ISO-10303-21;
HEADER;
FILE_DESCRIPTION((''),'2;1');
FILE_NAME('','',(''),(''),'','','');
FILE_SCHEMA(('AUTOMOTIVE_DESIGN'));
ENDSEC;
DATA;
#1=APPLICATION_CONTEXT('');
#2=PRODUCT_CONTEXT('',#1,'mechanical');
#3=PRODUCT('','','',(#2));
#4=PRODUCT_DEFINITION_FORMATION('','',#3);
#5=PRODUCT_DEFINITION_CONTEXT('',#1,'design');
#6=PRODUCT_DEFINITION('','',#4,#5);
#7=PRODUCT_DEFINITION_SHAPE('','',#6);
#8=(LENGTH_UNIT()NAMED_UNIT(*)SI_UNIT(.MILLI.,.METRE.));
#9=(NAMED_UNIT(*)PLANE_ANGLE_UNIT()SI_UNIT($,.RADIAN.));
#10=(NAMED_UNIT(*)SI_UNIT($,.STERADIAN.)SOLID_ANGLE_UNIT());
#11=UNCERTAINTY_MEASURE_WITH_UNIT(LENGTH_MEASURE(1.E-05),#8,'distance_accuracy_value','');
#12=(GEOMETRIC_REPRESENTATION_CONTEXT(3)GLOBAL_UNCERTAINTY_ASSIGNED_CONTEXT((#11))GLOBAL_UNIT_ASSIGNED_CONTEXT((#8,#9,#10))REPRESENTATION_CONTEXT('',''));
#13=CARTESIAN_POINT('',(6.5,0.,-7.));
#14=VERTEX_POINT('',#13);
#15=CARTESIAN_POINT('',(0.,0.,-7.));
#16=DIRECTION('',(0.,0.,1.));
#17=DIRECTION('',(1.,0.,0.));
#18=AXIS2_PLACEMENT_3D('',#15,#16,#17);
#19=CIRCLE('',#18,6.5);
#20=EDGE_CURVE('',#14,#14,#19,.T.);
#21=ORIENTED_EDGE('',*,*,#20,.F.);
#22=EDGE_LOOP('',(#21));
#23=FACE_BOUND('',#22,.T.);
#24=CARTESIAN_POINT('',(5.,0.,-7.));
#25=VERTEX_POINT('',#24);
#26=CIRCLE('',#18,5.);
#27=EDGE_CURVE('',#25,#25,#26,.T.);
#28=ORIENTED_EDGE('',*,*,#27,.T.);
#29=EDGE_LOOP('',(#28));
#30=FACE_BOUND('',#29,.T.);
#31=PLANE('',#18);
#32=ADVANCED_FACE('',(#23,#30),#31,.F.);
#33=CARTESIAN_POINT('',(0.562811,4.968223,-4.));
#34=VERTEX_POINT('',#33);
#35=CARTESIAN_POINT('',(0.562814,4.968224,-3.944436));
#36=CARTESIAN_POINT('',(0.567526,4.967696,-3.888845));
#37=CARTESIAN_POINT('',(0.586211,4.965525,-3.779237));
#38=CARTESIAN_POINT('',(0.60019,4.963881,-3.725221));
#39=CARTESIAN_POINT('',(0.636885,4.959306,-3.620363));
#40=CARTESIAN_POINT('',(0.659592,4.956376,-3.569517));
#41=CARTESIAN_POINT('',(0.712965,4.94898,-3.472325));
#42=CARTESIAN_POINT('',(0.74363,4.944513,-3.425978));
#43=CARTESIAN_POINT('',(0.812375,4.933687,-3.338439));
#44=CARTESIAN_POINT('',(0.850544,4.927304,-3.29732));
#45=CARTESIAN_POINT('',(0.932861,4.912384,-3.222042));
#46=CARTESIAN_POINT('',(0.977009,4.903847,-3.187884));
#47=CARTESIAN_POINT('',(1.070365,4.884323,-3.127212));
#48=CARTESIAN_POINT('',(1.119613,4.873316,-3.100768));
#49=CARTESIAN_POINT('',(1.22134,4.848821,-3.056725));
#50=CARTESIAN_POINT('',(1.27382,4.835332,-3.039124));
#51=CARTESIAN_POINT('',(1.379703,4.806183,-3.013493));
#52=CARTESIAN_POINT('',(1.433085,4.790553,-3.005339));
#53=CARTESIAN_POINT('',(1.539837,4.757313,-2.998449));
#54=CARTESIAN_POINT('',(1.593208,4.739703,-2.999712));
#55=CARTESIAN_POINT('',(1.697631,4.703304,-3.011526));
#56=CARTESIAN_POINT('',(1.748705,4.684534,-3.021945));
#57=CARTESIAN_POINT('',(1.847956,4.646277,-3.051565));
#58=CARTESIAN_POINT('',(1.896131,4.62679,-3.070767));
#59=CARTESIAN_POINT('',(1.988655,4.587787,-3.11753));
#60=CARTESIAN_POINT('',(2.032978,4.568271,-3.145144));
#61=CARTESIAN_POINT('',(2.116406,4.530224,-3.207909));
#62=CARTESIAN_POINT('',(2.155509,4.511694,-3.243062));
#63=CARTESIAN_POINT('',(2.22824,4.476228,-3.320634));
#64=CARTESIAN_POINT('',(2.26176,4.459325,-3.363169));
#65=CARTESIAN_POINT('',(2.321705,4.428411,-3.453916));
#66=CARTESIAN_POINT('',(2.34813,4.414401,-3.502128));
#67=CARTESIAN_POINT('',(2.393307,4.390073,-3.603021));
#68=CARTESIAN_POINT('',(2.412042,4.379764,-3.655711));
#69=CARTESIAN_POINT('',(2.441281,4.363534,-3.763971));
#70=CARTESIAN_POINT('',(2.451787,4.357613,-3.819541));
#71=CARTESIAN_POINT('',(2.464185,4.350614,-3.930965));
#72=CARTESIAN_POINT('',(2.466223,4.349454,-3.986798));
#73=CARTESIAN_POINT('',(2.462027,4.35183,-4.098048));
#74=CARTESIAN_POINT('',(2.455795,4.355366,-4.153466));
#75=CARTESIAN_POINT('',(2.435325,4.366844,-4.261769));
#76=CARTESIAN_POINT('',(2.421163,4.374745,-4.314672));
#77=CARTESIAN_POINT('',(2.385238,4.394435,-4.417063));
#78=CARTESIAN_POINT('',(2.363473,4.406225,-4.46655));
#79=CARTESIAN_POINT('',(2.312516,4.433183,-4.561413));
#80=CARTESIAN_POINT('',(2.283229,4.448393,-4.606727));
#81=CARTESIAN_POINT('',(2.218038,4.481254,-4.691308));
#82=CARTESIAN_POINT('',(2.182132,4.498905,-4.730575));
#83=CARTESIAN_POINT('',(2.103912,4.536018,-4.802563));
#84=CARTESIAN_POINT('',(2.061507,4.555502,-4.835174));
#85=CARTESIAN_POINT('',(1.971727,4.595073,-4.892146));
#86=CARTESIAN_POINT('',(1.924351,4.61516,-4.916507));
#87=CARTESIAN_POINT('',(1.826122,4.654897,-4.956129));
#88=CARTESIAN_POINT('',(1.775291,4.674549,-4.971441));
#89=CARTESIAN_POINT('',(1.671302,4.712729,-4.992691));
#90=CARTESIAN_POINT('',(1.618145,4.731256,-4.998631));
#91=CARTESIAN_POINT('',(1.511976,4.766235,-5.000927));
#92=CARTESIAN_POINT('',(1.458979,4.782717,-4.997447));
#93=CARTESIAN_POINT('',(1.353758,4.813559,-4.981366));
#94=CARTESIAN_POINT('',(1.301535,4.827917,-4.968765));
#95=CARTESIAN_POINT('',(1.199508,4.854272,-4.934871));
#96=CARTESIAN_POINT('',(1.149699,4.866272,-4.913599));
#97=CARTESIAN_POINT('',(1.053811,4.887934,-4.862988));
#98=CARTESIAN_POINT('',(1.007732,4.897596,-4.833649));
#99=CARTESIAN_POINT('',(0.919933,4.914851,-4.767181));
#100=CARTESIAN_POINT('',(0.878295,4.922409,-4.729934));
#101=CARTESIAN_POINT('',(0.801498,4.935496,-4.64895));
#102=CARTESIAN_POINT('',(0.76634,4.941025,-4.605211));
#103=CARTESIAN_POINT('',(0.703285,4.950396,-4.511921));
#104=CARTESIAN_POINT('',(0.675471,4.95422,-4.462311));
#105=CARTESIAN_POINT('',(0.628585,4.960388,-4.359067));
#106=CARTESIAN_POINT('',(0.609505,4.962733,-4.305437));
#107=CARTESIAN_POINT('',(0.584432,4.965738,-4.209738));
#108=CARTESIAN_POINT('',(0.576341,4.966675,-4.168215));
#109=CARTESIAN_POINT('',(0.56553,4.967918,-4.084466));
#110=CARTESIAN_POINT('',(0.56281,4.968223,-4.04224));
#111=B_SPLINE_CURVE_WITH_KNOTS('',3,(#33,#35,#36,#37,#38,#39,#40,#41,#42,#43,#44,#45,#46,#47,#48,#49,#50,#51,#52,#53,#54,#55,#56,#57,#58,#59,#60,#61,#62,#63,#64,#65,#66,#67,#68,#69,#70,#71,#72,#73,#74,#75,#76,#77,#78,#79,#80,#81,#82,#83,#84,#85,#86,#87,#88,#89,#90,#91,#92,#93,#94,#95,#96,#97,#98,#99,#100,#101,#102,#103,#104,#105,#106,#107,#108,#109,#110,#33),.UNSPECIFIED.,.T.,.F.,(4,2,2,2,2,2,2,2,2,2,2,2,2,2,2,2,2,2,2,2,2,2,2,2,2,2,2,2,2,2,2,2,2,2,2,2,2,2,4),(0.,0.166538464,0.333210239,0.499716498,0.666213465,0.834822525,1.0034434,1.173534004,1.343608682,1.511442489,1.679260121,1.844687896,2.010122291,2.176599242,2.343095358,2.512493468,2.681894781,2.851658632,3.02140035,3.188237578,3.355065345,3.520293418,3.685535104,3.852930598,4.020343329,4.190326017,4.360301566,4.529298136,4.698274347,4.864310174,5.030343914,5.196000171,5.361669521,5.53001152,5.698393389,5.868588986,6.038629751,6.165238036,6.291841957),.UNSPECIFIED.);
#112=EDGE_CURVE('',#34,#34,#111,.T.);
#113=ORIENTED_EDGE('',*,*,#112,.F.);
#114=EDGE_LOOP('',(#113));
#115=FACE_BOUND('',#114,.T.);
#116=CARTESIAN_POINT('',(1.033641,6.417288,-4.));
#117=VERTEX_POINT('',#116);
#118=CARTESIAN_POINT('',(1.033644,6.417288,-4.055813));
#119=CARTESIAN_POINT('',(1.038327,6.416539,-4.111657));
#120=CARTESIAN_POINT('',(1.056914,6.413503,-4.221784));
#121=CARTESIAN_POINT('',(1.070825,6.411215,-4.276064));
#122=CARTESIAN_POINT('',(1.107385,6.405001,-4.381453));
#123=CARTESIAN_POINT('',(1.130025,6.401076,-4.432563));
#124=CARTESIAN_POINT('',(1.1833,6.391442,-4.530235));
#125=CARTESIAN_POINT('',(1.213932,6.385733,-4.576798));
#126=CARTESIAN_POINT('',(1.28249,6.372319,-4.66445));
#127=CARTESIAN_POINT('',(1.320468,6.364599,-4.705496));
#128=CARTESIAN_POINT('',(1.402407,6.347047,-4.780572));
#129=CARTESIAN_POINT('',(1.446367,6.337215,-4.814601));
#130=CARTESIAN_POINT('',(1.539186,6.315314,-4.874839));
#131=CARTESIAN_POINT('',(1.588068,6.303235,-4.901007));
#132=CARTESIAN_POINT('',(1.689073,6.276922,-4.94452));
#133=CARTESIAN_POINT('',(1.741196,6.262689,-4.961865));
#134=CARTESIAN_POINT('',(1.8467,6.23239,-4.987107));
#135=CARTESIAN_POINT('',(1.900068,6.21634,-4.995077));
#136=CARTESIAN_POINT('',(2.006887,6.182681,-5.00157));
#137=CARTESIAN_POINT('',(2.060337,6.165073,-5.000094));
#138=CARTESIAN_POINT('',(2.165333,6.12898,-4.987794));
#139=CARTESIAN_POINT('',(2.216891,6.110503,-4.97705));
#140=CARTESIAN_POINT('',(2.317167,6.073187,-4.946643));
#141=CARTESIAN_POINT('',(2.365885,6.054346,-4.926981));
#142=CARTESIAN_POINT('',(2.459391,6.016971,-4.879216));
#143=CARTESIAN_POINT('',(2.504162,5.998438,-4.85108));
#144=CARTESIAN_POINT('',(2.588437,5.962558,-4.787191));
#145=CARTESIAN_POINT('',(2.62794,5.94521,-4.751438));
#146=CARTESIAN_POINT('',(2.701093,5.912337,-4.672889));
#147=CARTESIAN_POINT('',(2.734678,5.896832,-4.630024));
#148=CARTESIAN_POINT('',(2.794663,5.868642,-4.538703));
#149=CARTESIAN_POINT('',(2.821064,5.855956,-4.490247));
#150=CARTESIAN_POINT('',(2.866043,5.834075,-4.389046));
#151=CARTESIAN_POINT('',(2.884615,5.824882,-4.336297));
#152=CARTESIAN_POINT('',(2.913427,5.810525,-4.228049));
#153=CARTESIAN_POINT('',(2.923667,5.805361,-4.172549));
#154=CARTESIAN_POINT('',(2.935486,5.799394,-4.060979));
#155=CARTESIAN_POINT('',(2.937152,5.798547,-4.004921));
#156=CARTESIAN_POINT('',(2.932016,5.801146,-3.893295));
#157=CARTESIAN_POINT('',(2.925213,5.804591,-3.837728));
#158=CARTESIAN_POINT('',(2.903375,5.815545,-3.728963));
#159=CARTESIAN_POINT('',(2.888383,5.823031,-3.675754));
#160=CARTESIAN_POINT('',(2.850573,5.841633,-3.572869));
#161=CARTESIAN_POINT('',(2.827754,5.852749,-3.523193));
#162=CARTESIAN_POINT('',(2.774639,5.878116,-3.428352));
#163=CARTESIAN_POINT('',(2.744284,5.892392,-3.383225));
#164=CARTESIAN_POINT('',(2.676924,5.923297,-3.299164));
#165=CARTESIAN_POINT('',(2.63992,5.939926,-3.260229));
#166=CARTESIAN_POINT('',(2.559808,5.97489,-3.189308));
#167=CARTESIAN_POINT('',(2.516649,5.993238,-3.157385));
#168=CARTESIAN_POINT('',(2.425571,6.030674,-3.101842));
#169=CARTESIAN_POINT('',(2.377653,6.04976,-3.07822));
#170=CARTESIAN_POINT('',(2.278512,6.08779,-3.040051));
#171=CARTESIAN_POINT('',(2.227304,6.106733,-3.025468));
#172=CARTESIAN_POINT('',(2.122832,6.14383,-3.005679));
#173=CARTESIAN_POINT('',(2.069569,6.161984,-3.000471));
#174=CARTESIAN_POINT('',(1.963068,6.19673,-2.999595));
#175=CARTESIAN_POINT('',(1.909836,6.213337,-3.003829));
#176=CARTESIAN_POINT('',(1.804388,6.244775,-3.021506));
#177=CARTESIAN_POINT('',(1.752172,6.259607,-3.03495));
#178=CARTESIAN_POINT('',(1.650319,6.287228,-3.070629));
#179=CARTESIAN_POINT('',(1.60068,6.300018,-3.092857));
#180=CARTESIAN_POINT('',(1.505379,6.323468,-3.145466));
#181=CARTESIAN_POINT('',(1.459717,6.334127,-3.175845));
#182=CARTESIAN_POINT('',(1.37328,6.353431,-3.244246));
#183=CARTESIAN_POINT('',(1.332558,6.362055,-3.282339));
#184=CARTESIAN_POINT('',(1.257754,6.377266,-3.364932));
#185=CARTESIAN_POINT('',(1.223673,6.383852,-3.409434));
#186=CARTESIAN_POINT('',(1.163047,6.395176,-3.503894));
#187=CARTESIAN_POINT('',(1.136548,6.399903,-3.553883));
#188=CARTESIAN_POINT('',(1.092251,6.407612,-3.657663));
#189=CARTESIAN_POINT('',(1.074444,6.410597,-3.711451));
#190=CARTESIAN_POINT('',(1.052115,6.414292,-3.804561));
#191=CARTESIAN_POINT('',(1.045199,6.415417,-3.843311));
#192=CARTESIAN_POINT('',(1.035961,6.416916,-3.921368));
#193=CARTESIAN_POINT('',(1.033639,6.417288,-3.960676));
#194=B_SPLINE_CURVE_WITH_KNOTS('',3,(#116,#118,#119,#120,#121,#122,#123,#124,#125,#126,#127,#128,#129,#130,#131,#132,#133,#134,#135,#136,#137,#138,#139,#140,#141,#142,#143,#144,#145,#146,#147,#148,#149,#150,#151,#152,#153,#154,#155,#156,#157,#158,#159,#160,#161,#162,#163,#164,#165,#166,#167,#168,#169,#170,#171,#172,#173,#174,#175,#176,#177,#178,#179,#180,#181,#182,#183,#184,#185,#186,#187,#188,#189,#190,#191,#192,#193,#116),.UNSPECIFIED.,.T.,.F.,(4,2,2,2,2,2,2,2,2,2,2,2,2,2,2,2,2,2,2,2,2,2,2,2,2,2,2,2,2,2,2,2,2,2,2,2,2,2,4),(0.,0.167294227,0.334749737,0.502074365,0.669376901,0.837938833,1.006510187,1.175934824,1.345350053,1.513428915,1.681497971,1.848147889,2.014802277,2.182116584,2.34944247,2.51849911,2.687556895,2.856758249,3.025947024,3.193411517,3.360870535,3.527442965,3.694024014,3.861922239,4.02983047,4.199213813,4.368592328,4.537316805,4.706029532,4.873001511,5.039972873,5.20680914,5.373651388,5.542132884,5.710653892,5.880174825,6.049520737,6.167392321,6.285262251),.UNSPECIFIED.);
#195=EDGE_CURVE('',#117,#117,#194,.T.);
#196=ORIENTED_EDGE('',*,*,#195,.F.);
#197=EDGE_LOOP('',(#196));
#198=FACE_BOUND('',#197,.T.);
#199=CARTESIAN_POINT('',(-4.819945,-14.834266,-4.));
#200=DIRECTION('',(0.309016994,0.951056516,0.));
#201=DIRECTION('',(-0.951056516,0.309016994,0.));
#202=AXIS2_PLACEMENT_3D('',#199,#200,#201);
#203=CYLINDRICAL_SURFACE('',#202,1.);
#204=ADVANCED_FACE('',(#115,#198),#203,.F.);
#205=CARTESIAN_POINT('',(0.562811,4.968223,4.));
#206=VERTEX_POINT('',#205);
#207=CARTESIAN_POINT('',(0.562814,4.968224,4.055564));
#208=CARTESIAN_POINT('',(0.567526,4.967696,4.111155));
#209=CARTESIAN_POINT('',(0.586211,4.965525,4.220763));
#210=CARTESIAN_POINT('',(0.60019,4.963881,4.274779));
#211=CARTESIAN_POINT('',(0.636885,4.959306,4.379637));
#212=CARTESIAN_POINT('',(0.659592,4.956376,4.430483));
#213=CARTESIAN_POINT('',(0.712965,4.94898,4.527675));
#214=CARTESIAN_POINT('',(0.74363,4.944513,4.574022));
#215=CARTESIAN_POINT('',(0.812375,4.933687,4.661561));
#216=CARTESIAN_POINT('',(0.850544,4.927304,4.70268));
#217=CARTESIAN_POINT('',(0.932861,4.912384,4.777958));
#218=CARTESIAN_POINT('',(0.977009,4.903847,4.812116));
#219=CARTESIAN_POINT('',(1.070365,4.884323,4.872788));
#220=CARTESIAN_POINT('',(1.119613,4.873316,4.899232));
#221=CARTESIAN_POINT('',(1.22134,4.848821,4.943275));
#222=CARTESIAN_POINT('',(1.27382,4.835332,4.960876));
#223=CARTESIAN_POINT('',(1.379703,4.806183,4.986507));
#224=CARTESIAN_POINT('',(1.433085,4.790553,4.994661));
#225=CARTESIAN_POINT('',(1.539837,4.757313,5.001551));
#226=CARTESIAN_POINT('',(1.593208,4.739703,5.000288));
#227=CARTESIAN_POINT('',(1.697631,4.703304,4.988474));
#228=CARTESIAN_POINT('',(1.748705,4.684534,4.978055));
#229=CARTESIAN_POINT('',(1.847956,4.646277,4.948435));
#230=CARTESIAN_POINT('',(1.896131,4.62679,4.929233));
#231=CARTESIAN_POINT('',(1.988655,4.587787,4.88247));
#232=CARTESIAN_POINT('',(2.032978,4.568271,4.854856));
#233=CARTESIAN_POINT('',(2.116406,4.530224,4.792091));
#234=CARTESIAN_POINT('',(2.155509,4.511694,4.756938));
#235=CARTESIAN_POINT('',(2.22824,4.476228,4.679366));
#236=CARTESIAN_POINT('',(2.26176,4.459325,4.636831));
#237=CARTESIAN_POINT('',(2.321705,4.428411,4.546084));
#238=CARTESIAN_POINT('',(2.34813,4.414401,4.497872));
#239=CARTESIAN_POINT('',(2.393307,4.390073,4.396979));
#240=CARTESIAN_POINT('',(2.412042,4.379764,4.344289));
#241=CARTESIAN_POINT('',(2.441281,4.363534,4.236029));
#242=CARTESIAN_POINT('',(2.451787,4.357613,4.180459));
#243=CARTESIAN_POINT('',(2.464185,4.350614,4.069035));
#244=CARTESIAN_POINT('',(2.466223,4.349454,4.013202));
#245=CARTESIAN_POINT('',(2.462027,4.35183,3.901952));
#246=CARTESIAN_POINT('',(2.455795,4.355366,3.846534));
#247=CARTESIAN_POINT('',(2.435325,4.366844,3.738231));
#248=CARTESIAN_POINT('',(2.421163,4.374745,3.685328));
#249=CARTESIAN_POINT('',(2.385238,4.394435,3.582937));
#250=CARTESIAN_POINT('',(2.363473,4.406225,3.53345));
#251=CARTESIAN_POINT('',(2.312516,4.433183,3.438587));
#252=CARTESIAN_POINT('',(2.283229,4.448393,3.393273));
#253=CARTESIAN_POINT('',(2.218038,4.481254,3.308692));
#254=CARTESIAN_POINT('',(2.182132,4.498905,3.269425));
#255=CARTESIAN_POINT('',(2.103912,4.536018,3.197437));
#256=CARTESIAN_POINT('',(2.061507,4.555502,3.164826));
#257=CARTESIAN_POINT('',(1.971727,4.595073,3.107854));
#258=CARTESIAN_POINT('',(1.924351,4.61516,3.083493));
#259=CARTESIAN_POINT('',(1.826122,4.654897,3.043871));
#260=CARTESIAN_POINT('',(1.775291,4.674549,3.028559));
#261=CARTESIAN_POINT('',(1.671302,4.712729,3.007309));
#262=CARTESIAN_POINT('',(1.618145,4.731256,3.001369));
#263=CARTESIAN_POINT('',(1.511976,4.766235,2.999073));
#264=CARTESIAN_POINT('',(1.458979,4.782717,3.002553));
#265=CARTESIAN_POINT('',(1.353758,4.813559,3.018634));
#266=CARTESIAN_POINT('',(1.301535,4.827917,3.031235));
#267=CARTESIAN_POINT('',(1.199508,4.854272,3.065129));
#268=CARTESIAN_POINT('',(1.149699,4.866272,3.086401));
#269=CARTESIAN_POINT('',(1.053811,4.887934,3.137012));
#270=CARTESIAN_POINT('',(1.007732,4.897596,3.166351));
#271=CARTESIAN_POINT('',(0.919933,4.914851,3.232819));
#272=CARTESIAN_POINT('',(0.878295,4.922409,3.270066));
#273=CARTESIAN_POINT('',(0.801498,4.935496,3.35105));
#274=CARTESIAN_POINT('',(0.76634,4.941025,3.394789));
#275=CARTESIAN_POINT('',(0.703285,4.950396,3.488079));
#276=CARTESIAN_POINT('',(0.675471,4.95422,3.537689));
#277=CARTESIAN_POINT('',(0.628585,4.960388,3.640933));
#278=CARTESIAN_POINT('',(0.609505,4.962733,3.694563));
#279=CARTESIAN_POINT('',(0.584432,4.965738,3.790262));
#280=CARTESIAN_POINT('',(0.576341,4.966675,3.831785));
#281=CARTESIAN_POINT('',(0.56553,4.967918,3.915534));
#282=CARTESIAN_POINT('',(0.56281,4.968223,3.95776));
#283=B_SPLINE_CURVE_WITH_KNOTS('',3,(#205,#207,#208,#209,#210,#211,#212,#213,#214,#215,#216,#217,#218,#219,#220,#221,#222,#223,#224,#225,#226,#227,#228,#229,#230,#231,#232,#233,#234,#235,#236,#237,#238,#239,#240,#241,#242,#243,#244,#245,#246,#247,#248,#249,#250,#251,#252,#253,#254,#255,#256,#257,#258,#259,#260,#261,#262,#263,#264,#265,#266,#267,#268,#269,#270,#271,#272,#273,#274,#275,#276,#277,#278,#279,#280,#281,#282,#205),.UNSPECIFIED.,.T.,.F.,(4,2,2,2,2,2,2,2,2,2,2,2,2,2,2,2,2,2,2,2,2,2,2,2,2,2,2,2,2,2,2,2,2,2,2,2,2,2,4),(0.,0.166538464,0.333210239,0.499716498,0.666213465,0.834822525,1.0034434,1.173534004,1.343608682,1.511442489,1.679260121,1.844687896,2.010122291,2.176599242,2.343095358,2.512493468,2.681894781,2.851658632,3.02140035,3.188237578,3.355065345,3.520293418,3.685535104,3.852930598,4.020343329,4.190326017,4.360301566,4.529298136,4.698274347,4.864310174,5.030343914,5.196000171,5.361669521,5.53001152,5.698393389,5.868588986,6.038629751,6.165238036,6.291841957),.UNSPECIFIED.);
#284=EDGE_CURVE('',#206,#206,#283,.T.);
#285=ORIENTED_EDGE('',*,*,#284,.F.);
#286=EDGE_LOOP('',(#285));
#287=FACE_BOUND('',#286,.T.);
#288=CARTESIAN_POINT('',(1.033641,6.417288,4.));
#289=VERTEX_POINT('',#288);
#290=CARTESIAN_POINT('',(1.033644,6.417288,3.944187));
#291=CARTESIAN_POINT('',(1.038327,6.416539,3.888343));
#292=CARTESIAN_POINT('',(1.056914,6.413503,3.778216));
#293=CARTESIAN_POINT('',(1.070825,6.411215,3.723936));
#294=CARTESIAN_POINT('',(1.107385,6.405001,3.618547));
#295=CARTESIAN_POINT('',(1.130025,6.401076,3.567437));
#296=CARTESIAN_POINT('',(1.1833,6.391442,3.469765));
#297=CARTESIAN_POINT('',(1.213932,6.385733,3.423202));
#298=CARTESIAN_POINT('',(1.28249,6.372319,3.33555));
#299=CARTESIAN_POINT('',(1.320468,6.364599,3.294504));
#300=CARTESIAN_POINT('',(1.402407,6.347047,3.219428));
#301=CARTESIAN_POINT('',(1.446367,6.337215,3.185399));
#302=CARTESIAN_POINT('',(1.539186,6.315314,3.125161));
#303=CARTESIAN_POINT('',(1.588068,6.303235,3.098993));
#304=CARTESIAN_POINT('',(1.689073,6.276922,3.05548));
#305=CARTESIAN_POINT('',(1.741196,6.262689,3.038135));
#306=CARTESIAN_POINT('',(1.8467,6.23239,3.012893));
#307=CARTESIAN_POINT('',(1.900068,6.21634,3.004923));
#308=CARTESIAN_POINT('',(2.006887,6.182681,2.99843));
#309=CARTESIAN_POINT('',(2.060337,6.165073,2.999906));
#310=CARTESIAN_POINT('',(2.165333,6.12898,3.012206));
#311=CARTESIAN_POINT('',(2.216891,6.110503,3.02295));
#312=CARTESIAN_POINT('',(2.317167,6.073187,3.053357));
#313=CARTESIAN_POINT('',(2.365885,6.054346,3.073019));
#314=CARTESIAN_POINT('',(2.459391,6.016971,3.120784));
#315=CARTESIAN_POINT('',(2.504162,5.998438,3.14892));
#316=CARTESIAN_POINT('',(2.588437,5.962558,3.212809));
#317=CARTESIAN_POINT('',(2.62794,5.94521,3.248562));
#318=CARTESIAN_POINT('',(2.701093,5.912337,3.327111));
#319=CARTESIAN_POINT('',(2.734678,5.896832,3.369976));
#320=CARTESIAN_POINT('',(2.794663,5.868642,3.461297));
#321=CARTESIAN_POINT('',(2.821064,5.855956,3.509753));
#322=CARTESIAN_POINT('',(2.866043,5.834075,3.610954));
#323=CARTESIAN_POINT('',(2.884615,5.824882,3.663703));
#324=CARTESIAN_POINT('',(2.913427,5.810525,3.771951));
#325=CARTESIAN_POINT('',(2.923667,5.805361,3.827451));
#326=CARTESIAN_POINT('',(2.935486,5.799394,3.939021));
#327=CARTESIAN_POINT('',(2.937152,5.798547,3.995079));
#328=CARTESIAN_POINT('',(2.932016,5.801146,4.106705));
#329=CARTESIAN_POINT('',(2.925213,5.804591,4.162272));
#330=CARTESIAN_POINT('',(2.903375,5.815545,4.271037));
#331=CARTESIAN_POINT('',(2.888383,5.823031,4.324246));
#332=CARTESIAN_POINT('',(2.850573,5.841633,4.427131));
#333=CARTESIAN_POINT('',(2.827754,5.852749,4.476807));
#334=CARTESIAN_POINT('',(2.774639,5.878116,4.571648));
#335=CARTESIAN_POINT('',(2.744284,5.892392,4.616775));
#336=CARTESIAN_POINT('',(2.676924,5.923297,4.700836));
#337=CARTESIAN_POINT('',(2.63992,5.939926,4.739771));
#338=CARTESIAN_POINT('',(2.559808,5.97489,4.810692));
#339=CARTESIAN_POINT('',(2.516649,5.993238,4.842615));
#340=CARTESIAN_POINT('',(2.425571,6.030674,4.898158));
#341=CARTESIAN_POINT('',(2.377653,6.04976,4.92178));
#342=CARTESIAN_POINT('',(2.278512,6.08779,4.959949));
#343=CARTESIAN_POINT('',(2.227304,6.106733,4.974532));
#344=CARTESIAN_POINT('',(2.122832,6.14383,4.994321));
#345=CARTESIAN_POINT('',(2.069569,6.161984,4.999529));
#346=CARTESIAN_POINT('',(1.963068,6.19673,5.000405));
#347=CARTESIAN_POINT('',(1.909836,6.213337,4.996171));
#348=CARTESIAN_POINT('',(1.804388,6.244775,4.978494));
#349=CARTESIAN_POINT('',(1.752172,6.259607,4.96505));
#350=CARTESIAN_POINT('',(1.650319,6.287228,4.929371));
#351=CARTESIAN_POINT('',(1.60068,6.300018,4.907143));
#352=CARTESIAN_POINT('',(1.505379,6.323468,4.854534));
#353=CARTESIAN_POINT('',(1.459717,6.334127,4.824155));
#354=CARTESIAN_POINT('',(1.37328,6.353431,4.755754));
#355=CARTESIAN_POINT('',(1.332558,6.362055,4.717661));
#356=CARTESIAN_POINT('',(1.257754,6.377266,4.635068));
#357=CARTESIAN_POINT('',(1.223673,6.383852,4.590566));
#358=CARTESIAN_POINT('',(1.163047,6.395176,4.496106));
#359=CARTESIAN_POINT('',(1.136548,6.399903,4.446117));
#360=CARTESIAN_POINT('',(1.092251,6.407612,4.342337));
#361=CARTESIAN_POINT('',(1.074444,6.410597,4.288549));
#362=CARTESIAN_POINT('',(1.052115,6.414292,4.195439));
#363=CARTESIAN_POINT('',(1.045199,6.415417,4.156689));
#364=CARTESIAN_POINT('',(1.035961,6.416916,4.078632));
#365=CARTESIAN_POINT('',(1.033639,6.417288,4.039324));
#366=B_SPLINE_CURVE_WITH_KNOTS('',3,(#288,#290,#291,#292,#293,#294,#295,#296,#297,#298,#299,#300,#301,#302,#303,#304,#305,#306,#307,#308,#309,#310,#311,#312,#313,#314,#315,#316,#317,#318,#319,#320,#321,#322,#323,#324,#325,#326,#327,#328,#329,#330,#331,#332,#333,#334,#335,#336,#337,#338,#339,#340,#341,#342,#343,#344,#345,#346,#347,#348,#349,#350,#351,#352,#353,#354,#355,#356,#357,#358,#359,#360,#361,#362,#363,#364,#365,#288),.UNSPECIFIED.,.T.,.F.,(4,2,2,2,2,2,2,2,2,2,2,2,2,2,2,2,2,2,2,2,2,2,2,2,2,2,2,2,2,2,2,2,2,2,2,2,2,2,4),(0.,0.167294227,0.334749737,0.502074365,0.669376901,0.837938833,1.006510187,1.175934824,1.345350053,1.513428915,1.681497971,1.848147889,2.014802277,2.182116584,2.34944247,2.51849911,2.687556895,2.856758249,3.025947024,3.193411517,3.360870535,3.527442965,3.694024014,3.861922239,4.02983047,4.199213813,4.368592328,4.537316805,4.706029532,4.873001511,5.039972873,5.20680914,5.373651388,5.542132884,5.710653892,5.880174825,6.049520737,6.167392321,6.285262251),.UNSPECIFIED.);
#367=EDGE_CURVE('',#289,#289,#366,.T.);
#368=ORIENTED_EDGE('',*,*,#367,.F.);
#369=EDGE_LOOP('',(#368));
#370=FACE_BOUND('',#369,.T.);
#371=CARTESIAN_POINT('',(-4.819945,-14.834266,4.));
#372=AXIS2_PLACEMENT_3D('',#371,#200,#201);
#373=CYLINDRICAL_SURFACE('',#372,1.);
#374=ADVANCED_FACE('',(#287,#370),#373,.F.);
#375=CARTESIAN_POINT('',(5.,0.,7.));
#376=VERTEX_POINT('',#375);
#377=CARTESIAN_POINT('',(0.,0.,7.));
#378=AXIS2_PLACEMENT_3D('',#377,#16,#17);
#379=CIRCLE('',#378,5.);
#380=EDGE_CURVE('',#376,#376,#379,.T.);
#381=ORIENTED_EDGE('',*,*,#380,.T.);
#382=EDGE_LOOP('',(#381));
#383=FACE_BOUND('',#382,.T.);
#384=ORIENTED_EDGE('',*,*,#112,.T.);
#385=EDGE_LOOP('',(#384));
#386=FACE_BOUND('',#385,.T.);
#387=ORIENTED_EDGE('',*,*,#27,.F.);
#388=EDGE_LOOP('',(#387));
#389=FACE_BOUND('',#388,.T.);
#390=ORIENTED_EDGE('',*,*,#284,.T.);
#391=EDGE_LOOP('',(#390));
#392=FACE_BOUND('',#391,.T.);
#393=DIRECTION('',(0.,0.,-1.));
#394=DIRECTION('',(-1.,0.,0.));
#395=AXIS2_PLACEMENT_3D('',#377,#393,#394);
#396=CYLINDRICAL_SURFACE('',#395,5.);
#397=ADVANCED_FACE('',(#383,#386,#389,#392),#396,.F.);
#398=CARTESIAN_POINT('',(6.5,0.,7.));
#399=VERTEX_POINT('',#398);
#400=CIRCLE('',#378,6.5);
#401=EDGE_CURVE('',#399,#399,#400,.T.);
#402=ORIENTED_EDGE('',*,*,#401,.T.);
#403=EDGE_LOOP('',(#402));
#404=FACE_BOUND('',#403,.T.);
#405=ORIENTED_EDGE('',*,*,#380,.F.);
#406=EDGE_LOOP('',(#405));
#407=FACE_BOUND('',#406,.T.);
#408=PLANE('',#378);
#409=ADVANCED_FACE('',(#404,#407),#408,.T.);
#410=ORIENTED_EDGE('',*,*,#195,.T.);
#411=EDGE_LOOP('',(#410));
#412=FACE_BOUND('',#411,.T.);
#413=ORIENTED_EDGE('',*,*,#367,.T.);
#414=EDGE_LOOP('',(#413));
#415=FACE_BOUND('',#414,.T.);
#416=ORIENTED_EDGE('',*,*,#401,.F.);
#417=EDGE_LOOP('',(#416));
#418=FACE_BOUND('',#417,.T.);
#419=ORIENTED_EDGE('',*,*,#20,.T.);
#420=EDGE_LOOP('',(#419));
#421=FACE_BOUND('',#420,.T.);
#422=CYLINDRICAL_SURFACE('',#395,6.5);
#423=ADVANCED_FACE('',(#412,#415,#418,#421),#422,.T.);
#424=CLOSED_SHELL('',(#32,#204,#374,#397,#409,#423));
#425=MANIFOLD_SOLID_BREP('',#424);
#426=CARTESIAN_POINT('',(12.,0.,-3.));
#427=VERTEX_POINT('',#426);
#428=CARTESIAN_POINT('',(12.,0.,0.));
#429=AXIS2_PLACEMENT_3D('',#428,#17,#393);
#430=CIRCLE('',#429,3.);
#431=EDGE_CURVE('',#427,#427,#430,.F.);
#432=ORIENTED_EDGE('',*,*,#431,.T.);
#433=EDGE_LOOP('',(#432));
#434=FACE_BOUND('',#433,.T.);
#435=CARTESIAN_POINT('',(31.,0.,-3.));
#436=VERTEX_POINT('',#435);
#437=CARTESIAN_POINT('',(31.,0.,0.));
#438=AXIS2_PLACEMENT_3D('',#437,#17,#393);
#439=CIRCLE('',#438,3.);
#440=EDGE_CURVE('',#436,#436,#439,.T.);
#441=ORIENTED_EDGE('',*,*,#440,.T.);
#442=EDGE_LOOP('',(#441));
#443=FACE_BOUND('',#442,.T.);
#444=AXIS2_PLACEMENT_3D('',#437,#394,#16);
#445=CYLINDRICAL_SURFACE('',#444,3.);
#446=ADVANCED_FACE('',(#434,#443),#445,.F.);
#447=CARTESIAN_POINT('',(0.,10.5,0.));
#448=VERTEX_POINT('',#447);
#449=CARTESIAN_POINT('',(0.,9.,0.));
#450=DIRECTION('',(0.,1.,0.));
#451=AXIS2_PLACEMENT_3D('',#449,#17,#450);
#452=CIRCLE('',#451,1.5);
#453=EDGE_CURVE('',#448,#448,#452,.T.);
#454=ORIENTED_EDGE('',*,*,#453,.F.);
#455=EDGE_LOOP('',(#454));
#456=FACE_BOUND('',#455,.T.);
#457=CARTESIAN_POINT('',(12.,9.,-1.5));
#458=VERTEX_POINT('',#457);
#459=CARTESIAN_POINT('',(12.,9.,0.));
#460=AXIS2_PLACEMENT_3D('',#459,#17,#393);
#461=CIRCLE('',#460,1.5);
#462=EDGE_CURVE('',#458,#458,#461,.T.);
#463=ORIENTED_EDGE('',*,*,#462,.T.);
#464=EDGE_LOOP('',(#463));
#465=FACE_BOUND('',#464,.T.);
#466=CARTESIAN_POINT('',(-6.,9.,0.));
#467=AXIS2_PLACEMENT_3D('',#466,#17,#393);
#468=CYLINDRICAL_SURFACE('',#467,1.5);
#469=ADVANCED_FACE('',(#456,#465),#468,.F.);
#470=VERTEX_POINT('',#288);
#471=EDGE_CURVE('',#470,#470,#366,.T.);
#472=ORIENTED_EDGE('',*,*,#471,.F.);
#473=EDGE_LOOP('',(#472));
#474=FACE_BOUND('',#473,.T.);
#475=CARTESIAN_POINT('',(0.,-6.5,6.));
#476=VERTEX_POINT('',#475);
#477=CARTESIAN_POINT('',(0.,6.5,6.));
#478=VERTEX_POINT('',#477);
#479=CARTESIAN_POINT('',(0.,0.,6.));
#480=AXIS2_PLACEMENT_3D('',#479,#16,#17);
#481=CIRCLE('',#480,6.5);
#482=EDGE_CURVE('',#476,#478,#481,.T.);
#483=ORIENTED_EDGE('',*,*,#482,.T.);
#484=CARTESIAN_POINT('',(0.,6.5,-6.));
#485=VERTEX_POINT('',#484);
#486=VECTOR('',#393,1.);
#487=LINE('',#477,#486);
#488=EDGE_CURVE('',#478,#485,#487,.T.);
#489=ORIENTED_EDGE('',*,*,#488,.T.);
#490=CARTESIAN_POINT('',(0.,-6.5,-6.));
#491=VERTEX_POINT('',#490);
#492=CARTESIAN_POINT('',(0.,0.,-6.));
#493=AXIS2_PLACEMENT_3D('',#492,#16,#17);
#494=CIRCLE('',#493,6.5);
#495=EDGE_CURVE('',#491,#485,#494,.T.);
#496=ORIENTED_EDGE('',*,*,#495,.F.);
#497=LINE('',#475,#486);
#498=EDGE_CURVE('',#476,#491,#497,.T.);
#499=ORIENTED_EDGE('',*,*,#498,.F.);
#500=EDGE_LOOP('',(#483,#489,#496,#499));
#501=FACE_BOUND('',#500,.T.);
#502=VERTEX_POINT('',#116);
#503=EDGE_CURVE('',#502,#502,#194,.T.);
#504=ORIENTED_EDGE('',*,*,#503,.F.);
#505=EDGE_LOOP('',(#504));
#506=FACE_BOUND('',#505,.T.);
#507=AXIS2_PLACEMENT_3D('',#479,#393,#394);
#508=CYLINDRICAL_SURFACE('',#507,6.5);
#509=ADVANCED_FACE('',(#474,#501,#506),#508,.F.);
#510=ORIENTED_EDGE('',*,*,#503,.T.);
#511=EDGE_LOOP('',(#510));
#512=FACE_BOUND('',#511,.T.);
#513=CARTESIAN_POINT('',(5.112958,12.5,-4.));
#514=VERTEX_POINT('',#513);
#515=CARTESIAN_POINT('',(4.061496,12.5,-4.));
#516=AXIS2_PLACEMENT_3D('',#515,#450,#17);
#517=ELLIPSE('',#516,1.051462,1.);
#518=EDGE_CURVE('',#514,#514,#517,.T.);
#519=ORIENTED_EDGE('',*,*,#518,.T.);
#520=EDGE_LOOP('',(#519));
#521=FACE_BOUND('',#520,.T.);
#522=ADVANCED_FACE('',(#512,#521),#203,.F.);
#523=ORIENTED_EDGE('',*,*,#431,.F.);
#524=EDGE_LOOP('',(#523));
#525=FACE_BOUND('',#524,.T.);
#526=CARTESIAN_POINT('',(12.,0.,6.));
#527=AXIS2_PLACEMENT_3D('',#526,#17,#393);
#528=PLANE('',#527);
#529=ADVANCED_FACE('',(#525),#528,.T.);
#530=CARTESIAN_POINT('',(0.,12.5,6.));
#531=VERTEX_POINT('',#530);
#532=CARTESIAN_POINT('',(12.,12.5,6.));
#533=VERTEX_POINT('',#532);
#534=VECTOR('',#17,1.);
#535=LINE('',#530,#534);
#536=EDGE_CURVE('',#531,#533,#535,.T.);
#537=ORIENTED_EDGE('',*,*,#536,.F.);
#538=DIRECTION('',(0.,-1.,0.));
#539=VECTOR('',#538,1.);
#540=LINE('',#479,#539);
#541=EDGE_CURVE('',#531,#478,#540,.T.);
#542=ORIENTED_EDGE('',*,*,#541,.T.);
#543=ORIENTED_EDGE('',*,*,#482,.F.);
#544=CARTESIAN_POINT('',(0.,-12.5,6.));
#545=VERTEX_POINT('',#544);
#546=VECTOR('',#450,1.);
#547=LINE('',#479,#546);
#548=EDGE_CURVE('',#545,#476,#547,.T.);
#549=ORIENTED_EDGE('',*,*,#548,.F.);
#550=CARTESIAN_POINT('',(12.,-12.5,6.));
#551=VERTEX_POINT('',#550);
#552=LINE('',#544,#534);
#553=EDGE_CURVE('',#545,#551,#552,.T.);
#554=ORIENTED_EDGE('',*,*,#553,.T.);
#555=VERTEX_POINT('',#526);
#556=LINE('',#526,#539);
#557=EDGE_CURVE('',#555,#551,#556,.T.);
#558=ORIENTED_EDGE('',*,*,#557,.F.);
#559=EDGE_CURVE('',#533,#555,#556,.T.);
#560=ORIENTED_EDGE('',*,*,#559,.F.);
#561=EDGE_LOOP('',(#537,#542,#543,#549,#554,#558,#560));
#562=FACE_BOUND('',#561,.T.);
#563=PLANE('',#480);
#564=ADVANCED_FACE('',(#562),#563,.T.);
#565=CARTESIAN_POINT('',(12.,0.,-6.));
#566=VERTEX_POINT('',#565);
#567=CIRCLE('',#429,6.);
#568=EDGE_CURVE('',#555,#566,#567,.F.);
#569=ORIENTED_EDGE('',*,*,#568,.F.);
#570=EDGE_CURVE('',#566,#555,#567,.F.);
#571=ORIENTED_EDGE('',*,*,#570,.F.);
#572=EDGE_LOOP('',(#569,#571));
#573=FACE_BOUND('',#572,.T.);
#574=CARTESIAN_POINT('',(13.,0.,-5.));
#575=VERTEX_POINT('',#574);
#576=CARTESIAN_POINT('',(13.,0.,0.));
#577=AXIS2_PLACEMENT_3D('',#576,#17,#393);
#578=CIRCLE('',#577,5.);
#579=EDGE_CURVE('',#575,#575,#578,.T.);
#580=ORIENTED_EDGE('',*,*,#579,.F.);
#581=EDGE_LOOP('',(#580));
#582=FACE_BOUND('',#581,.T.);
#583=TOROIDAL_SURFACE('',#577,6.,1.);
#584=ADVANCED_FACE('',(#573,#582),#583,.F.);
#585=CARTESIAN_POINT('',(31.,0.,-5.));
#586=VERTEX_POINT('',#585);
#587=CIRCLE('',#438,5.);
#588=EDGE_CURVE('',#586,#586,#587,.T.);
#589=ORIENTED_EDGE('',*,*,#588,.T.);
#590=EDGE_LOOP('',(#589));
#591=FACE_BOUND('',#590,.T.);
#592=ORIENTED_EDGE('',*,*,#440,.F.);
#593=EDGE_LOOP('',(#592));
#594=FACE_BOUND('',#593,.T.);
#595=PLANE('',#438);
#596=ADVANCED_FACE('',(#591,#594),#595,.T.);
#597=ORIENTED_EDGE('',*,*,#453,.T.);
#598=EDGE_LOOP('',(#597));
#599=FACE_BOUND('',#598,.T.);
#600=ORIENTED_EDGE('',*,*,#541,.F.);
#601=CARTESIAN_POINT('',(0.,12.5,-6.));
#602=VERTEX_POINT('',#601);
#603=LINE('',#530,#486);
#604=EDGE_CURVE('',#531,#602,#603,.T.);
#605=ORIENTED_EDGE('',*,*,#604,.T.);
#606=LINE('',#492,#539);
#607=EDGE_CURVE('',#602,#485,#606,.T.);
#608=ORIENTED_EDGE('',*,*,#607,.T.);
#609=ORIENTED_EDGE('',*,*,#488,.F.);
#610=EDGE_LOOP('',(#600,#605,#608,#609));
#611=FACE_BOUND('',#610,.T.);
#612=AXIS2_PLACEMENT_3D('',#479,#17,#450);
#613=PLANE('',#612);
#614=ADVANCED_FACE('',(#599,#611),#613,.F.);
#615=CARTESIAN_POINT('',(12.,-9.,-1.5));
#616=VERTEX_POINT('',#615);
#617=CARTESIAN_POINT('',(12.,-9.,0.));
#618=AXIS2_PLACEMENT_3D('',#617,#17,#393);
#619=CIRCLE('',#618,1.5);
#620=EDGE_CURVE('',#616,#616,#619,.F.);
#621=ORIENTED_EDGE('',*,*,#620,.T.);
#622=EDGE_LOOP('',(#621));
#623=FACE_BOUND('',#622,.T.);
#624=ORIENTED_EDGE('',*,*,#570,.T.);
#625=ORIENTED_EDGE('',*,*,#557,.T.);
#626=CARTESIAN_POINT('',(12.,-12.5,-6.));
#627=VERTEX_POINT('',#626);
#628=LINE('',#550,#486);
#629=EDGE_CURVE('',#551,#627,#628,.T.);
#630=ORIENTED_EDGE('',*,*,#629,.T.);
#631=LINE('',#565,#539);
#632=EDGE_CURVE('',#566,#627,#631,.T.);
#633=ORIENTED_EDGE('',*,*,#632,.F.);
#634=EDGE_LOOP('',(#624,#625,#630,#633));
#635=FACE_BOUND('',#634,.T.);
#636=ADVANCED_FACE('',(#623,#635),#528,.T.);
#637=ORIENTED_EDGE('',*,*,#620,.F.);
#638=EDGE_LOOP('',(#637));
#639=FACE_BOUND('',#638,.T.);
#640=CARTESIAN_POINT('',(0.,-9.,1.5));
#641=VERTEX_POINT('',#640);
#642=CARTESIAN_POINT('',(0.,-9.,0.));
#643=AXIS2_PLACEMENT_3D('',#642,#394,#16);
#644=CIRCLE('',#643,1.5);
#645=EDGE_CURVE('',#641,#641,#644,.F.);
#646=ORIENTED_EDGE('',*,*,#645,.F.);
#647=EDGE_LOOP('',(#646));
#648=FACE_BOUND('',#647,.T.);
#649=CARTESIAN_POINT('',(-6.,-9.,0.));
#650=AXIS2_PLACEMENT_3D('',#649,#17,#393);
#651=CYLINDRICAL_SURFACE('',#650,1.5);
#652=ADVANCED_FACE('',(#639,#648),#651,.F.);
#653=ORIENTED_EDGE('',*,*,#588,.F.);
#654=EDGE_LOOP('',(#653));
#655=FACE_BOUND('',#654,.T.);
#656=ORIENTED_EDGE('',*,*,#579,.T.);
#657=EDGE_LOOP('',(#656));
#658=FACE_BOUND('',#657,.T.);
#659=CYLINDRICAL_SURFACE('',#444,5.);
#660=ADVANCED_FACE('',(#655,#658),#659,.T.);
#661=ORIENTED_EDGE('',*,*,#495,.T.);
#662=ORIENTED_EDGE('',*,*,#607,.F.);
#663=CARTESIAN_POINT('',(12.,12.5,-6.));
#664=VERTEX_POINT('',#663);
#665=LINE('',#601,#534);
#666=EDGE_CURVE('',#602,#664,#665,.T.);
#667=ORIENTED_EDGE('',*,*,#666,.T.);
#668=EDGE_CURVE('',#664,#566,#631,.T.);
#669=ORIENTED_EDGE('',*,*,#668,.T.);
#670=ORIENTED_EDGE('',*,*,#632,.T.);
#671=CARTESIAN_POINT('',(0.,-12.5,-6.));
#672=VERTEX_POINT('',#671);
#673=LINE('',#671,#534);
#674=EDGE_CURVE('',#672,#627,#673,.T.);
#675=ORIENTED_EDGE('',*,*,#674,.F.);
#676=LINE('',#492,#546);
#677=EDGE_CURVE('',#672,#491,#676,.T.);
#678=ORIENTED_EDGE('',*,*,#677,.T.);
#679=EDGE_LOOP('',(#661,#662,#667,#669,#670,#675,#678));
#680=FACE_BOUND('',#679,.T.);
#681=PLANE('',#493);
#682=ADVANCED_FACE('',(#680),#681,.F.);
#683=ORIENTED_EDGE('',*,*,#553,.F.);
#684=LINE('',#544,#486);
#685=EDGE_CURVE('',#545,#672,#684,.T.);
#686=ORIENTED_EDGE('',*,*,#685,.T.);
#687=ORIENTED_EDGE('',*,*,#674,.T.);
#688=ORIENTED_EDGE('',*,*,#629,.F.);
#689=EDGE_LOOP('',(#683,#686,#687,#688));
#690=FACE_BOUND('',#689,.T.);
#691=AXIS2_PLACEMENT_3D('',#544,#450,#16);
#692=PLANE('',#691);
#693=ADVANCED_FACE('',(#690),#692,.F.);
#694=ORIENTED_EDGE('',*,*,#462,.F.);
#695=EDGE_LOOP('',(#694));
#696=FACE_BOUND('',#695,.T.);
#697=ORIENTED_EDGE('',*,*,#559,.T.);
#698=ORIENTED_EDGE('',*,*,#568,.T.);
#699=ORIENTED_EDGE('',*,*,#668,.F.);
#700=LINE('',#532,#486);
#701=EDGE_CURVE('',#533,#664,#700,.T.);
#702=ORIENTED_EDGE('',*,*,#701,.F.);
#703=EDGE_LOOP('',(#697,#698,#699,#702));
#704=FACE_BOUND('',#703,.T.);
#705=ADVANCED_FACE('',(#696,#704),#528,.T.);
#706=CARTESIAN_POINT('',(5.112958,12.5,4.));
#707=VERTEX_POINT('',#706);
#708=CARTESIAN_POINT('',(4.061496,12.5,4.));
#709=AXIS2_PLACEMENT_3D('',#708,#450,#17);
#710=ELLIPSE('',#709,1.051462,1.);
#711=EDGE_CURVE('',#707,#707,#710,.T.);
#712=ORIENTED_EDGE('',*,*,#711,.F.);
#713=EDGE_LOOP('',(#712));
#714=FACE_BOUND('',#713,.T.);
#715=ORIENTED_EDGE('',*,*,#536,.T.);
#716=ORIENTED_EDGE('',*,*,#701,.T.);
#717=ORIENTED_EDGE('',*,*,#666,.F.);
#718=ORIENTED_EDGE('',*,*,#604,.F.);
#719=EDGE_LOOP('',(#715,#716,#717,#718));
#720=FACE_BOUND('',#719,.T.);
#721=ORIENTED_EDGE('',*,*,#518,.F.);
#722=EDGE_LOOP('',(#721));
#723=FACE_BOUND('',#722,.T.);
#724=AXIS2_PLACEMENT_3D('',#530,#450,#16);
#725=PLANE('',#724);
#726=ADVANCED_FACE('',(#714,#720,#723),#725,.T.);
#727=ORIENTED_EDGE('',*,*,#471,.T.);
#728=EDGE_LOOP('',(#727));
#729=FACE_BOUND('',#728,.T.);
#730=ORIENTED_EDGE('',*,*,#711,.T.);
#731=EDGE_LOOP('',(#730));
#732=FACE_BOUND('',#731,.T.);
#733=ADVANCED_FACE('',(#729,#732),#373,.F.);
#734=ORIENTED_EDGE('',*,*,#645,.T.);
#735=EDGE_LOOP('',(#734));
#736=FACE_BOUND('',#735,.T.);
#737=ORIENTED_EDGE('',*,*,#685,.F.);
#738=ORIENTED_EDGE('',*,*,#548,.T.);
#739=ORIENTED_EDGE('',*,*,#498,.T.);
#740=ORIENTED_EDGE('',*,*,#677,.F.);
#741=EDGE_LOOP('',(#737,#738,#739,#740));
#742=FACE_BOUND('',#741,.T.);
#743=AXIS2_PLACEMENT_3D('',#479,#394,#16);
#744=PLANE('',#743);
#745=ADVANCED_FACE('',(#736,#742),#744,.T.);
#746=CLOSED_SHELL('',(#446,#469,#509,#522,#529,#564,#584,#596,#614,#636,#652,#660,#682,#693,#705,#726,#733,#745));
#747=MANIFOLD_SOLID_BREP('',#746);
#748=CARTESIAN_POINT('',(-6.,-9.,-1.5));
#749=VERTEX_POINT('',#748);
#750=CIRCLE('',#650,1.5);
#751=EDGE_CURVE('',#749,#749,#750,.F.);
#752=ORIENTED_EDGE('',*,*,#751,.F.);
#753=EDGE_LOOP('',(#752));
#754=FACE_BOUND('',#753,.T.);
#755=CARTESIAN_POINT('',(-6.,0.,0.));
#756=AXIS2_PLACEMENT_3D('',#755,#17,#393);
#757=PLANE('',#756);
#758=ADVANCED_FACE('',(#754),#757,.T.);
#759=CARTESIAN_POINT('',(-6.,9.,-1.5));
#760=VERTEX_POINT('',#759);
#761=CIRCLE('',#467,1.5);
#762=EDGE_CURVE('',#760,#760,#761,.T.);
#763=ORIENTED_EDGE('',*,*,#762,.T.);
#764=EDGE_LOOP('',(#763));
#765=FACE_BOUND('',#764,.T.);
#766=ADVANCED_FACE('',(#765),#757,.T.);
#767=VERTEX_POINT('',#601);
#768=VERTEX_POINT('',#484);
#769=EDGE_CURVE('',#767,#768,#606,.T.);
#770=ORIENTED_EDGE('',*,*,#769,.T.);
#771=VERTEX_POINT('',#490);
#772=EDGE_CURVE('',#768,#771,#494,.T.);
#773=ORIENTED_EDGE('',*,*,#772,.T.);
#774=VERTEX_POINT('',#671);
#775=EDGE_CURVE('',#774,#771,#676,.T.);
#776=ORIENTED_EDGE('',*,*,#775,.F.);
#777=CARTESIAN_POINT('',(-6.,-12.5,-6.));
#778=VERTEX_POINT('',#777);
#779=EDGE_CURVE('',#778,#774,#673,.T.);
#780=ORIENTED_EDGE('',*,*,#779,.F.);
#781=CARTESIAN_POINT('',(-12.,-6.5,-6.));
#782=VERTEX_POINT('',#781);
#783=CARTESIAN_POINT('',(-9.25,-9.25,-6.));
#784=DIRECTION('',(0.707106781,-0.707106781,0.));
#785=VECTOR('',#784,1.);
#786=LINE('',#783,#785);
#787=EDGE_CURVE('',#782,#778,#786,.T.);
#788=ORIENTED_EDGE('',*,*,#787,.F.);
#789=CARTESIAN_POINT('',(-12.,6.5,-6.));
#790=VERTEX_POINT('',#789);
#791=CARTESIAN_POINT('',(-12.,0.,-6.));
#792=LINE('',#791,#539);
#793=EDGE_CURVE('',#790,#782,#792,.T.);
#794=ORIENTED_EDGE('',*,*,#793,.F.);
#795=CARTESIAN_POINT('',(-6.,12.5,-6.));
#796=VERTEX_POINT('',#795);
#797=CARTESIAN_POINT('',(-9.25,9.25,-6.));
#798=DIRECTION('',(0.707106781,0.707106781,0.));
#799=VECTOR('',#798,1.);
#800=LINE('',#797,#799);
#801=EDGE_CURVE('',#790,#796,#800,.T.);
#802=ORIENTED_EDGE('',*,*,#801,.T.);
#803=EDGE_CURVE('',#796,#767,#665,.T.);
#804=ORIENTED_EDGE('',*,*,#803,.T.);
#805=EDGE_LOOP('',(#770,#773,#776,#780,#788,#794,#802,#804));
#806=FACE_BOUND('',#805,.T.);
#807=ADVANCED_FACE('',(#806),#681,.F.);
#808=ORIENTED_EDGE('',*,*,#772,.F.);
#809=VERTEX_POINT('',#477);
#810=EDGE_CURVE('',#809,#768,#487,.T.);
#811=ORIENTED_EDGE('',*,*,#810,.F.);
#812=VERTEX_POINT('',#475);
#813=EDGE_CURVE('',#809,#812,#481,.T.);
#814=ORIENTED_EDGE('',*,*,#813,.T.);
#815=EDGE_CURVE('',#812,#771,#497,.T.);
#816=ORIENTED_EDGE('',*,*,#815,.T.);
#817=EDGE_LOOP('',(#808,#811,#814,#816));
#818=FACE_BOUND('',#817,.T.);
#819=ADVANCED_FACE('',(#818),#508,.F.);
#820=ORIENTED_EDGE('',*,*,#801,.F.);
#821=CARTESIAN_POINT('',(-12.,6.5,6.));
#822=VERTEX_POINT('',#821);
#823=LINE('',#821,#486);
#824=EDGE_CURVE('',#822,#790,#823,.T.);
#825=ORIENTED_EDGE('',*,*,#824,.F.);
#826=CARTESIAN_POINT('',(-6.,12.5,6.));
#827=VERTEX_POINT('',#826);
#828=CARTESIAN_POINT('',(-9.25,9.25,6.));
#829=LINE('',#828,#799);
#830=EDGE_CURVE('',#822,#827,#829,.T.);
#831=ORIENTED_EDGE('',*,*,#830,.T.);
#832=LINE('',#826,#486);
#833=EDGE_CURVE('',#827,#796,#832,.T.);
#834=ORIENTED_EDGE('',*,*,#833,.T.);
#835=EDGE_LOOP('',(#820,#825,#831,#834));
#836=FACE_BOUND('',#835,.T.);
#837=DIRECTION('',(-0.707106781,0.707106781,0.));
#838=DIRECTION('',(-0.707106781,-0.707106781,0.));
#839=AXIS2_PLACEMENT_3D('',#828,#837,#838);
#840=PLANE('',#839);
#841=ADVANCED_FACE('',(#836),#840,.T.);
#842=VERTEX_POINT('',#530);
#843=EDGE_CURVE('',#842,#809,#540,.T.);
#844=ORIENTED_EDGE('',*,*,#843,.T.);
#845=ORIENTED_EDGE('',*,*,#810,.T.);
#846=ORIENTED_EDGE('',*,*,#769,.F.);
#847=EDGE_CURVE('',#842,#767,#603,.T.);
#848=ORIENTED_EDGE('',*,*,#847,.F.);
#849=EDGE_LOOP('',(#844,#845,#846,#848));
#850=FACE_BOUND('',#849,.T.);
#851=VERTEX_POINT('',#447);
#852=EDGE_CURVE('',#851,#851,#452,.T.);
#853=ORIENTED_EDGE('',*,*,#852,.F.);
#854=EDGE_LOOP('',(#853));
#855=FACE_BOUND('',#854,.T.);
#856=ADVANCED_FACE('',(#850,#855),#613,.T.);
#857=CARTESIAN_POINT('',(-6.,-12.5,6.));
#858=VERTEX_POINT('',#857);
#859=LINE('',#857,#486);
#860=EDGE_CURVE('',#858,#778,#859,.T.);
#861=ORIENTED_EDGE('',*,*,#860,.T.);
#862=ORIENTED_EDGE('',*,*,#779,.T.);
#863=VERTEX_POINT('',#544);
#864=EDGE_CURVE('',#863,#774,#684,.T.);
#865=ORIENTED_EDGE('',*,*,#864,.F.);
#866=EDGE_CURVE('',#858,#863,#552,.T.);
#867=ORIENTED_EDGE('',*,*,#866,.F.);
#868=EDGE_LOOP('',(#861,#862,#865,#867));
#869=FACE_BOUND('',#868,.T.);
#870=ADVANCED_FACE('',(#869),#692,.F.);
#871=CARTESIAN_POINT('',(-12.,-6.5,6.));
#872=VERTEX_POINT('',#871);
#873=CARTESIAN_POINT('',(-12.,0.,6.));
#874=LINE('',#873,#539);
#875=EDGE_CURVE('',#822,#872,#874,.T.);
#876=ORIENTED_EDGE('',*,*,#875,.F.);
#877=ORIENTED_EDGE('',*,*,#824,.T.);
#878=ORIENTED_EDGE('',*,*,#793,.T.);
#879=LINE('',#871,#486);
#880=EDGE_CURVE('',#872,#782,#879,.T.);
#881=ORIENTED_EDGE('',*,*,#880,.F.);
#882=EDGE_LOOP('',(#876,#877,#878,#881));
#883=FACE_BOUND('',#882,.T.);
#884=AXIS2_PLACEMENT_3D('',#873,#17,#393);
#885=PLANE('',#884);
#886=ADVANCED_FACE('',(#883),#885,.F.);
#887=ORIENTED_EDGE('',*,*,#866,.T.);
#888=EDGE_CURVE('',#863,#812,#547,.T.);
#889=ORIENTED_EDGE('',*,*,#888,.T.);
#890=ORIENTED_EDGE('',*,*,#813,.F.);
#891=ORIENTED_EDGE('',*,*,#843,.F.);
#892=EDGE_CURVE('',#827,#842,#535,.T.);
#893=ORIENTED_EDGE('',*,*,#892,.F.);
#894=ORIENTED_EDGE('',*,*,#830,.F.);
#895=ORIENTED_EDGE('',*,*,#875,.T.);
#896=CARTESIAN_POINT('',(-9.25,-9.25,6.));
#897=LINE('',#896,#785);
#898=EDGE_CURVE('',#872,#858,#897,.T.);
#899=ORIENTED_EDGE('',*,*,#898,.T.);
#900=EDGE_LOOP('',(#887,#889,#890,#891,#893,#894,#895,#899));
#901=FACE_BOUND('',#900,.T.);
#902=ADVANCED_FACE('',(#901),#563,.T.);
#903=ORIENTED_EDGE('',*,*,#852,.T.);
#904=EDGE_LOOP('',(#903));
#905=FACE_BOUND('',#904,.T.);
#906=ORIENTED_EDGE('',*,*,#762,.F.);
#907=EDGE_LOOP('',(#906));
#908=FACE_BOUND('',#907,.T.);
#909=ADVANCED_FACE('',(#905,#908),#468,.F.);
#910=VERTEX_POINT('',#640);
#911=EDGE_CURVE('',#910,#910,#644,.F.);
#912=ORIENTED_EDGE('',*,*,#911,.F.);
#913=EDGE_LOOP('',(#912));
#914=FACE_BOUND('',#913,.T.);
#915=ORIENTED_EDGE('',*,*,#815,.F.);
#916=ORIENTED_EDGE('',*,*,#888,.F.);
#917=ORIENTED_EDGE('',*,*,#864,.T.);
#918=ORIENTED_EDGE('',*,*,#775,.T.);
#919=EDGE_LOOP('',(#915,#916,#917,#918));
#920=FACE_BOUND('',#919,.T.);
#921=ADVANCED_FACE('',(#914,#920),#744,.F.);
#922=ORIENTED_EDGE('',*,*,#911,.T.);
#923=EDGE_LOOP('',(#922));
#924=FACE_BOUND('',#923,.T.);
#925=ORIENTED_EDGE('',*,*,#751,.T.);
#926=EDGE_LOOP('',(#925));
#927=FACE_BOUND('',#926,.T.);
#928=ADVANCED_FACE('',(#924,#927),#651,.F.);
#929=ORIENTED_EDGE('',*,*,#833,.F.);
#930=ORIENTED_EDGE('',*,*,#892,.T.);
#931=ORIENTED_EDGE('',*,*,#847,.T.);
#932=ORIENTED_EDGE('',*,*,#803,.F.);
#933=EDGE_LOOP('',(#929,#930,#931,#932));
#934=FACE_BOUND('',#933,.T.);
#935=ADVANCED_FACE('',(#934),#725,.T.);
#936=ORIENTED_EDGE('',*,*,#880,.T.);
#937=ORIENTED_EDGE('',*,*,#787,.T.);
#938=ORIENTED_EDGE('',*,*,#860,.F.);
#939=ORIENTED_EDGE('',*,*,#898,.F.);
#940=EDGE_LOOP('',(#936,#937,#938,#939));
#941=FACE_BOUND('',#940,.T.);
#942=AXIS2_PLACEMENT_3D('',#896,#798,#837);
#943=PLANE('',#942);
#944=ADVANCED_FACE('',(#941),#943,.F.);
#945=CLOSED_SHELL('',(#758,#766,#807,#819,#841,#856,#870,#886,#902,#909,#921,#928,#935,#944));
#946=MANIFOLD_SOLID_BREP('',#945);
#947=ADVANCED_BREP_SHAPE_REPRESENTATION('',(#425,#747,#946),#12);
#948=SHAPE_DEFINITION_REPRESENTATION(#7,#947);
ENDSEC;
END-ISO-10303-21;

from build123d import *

# Parameters (mm, degrees)
BOSS_EXTRUDE1_DEPTH     = 6
BOSS_EXTRUDE2_DEPTH     = 6
SKETCH2_R               = 5
SKETCH2_R_2             = 3
BOSS_EXTRUDE3_DEPTH     = 19
SKETCH2_3_R             = 1.5
CUT_EXTRUDE1_DEPTH      = 18
BOSS_EXTRUDE4_DEPTH     = 7
CUT_EXTRUDE2_REACH      = 40.49
CUT_EXTRUDE2_END_RADIUS = 5
SKETCH3_R               = 1
FILLET1_R               = 1


with BuildPart() as part:
    # Sketch1 → Boss-Extrude1 (new, symmetric)
    with BuildSketch(Plane.XY):
        with BuildLine():
            Line((12, 12.5), (0, 12.5))
            Line((0, 12.5), (0, 6.5))
            ThreePointArc((0, 6.5), (4.596194078, 4.596194078), (6.5, 0))
            ThreePointArc((6.5, 0), (4.596194078, -4.596194078), (0, -6.5))
            Line((0, -6.5), (0, -12.5))
            Line((0, -12.5), (12, -12.5))
            Line((12, -12.5), (12, 12.5))
        make_face()
    extrude(amount=BOSS_EXTRUDE1_DEPTH, both=True)

    # Sketch2 → Boss-Extrude3 (add)
    with BuildSketch(Plane(origin=(12, 0, 0), x_dir=(0, 0, -1), z_dir=(1, 0, 0))):
        Circle(SKETCH2_R)
        Circle(SKETCH2_R_2, mode=Mode.SUBTRACT)
    extrude(amount=BOSS_EXTRUDE3_DEPTH)


with BuildPart() as body_2:
    # Sketch1<3> → Boss-Extrude2 (new, symmetric)
    with BuildSketch(Plane.XY):
        with BuildLine():
            Line((0, 6.5), (0, 12.5))
            Line((0, 12.5), (-6, 12.5))
            Line((-6, 12.5), (-12, 6.5))
            Line((-12, 6.5), (-12, -6.5))
            Line((-12, -6.5), (-6, -12.5))
            Line((-6, -12.5), (0, -12.5))
            Line((0, -12.5), (0, -6.5))
            ThreePointArc((0, -6.5), (-6.5, 0), (0, 6.5))
        make_face()
    extrude(amount=BOSS_EXTRUDE2_DEPTH, both=True)


with BuildPart() as cut_extrude1_tool:
    # Sketch2<3> → Cut-Extrude1 (new body)
    with BuildSketch(Plane(origin=(12, 0, 0), x_dir=(0, 0, -1), z_dir=(1, 0, 0))):
        with Locations((0, 9)):
            Circle(SKETCH2_3_R)
        with Locations((0, -9)):
            Circle(SKETCH2_3_R)
    extrude(amount=-CUT_EXTRUDE1_DEPTH)


with BuildPart() as part_1:
    add(part.part)

    # Cut-Extrude1: cut by cut_extrude1_tool
    add(cut_extrude1_tool.part, mode=Mode.SUBTRACT)


with BuildPart() as body_2_1:
    add(body_2.part)

    # Cut-Extrude1: cut by cut_extrude1_tool
    add(cut_extrude1_tool.part, mode=Mode.SUBTRACT)


with BuildPart() as body_3:
    # Sketch1<4> → Boss-Extrude4 (new, symmetric)
    with BuildSketch(Plane.XY):
        with BuildLine():
            ThreePointArc((6.5, 0), (4.596194078, 4.596194078), (0, 6.5))
            Line((0, 6.5), (0, 5))
            ThreePointArc((0, 5), (3.535533906, 3.535533906), (5, 0))
            ThreePointArc((5, 0), (3.535533906, -3.535533906), (0, -5))
            Line((0, -5), (0, -6.5))
            ThreePointArc((0, -6.5), (4.596194078, -4.596194078), (6.5, 0))
        make_face()
        with BuildLine():
            Line((0, 5), (0, 6.5))
            ThreePointArc((0, 6.5), (-6.5, 0), (0, -6.5))
            Line((0, -6.5), (0, -5))
            ThreePointArc((0, -5), (-5, 0), (0, 5))
        make_face()
    extrude(amount=BOSS_EXTRUDE4_DEPTH, both=True)


with BuildPart() as cut_extrude2_tool:
    # Cut-Extrude2: up to this cylinder (the profile starts outside it)
    cut_extrude2_end = Plane(origin=(0, 0, 0), z_dir=(0, 0, -1)) * Cylinder(CUT_EXTRUDE2_END_RADIUS, 99.98, mode=Mode.PRIVATE)
    # Sketch3 → Cut-Extrude2 (new, up to the surface)
    with BuildSketch(Plane(origin=(4.819555861, 14.833067729, 0), x_dir=(0, 0, -1), z_dir=(0.3090169943749482, 0.9510565162951534, 0)), mode=Mode.PRIVATE) as cut_extrude2_sk1:
        with Locations(Location((-4, 0, 0), (0, 0, 90))):
            Circle(SKETCH3_R)
    cut_extrude2_tool1 = extrude(cut_extrude2_sk1.sketch, amount=-CUT_EXTRUDE2_REACH, mode=Mode.PRIVATE) - cut_extrude2_end
    add(cut_extrude2_tool1.solids().sort_by_distance((4.819556, 14.833068, 4))[0])
    # Sketch3 → Cut-Extrude2 (new, up to the surface)
    with BuildSketch(Plane(origin=(4.819555861, 14.833067729, 0), x_dir=(0, 0, -1), z_dir=(0.3090169943749482, 0.9510565162951534, 0)), mode=Mode.PRIVATE) as cut_extrude2_sk2:
        with Locations(Location((4, 0, 0), (0, 0, 90))):
            Circle(SKETCH3_R)
    cut_extrude2_tool2 = extrude(cut_extrude2_sk2.sketch, amount=-CUT_EXTRUDE2_REACH, mode=Mode.PRIVATE) - cut_extrude2_end
    add(cut_extrude2_tool2.solids().sort_by_distance((4.819556, 14.833068, -4))[0])


with BuildPart() as part_2:
    add(part_1.part)

    # Cut-Extrude2: cut by cut_extrude2_tool
    add(cut_extrude2_tool.part, mode=Mode.SUBTRACT)

    # Fillet1
    fillet1_edges = [part_2.edges().sort_by_distance(p)[0] for p in [
        (12, 0, 5),
    ]]
    fillet(fillet1_edges, radius=FILLET1_R - 0.0001)  # a hair under: the kernel refuses the full size


with BuildPart() as body_3_1:
    add(body_3.part)

    # Cut-Extrude2: cut by cut_extrude2_tool
    add(cut_extrude2_tool.part, mode=Mode.SUBTRACT)


solid = Compound([body_2_1.part, part_2.part, body_3_1.part])
